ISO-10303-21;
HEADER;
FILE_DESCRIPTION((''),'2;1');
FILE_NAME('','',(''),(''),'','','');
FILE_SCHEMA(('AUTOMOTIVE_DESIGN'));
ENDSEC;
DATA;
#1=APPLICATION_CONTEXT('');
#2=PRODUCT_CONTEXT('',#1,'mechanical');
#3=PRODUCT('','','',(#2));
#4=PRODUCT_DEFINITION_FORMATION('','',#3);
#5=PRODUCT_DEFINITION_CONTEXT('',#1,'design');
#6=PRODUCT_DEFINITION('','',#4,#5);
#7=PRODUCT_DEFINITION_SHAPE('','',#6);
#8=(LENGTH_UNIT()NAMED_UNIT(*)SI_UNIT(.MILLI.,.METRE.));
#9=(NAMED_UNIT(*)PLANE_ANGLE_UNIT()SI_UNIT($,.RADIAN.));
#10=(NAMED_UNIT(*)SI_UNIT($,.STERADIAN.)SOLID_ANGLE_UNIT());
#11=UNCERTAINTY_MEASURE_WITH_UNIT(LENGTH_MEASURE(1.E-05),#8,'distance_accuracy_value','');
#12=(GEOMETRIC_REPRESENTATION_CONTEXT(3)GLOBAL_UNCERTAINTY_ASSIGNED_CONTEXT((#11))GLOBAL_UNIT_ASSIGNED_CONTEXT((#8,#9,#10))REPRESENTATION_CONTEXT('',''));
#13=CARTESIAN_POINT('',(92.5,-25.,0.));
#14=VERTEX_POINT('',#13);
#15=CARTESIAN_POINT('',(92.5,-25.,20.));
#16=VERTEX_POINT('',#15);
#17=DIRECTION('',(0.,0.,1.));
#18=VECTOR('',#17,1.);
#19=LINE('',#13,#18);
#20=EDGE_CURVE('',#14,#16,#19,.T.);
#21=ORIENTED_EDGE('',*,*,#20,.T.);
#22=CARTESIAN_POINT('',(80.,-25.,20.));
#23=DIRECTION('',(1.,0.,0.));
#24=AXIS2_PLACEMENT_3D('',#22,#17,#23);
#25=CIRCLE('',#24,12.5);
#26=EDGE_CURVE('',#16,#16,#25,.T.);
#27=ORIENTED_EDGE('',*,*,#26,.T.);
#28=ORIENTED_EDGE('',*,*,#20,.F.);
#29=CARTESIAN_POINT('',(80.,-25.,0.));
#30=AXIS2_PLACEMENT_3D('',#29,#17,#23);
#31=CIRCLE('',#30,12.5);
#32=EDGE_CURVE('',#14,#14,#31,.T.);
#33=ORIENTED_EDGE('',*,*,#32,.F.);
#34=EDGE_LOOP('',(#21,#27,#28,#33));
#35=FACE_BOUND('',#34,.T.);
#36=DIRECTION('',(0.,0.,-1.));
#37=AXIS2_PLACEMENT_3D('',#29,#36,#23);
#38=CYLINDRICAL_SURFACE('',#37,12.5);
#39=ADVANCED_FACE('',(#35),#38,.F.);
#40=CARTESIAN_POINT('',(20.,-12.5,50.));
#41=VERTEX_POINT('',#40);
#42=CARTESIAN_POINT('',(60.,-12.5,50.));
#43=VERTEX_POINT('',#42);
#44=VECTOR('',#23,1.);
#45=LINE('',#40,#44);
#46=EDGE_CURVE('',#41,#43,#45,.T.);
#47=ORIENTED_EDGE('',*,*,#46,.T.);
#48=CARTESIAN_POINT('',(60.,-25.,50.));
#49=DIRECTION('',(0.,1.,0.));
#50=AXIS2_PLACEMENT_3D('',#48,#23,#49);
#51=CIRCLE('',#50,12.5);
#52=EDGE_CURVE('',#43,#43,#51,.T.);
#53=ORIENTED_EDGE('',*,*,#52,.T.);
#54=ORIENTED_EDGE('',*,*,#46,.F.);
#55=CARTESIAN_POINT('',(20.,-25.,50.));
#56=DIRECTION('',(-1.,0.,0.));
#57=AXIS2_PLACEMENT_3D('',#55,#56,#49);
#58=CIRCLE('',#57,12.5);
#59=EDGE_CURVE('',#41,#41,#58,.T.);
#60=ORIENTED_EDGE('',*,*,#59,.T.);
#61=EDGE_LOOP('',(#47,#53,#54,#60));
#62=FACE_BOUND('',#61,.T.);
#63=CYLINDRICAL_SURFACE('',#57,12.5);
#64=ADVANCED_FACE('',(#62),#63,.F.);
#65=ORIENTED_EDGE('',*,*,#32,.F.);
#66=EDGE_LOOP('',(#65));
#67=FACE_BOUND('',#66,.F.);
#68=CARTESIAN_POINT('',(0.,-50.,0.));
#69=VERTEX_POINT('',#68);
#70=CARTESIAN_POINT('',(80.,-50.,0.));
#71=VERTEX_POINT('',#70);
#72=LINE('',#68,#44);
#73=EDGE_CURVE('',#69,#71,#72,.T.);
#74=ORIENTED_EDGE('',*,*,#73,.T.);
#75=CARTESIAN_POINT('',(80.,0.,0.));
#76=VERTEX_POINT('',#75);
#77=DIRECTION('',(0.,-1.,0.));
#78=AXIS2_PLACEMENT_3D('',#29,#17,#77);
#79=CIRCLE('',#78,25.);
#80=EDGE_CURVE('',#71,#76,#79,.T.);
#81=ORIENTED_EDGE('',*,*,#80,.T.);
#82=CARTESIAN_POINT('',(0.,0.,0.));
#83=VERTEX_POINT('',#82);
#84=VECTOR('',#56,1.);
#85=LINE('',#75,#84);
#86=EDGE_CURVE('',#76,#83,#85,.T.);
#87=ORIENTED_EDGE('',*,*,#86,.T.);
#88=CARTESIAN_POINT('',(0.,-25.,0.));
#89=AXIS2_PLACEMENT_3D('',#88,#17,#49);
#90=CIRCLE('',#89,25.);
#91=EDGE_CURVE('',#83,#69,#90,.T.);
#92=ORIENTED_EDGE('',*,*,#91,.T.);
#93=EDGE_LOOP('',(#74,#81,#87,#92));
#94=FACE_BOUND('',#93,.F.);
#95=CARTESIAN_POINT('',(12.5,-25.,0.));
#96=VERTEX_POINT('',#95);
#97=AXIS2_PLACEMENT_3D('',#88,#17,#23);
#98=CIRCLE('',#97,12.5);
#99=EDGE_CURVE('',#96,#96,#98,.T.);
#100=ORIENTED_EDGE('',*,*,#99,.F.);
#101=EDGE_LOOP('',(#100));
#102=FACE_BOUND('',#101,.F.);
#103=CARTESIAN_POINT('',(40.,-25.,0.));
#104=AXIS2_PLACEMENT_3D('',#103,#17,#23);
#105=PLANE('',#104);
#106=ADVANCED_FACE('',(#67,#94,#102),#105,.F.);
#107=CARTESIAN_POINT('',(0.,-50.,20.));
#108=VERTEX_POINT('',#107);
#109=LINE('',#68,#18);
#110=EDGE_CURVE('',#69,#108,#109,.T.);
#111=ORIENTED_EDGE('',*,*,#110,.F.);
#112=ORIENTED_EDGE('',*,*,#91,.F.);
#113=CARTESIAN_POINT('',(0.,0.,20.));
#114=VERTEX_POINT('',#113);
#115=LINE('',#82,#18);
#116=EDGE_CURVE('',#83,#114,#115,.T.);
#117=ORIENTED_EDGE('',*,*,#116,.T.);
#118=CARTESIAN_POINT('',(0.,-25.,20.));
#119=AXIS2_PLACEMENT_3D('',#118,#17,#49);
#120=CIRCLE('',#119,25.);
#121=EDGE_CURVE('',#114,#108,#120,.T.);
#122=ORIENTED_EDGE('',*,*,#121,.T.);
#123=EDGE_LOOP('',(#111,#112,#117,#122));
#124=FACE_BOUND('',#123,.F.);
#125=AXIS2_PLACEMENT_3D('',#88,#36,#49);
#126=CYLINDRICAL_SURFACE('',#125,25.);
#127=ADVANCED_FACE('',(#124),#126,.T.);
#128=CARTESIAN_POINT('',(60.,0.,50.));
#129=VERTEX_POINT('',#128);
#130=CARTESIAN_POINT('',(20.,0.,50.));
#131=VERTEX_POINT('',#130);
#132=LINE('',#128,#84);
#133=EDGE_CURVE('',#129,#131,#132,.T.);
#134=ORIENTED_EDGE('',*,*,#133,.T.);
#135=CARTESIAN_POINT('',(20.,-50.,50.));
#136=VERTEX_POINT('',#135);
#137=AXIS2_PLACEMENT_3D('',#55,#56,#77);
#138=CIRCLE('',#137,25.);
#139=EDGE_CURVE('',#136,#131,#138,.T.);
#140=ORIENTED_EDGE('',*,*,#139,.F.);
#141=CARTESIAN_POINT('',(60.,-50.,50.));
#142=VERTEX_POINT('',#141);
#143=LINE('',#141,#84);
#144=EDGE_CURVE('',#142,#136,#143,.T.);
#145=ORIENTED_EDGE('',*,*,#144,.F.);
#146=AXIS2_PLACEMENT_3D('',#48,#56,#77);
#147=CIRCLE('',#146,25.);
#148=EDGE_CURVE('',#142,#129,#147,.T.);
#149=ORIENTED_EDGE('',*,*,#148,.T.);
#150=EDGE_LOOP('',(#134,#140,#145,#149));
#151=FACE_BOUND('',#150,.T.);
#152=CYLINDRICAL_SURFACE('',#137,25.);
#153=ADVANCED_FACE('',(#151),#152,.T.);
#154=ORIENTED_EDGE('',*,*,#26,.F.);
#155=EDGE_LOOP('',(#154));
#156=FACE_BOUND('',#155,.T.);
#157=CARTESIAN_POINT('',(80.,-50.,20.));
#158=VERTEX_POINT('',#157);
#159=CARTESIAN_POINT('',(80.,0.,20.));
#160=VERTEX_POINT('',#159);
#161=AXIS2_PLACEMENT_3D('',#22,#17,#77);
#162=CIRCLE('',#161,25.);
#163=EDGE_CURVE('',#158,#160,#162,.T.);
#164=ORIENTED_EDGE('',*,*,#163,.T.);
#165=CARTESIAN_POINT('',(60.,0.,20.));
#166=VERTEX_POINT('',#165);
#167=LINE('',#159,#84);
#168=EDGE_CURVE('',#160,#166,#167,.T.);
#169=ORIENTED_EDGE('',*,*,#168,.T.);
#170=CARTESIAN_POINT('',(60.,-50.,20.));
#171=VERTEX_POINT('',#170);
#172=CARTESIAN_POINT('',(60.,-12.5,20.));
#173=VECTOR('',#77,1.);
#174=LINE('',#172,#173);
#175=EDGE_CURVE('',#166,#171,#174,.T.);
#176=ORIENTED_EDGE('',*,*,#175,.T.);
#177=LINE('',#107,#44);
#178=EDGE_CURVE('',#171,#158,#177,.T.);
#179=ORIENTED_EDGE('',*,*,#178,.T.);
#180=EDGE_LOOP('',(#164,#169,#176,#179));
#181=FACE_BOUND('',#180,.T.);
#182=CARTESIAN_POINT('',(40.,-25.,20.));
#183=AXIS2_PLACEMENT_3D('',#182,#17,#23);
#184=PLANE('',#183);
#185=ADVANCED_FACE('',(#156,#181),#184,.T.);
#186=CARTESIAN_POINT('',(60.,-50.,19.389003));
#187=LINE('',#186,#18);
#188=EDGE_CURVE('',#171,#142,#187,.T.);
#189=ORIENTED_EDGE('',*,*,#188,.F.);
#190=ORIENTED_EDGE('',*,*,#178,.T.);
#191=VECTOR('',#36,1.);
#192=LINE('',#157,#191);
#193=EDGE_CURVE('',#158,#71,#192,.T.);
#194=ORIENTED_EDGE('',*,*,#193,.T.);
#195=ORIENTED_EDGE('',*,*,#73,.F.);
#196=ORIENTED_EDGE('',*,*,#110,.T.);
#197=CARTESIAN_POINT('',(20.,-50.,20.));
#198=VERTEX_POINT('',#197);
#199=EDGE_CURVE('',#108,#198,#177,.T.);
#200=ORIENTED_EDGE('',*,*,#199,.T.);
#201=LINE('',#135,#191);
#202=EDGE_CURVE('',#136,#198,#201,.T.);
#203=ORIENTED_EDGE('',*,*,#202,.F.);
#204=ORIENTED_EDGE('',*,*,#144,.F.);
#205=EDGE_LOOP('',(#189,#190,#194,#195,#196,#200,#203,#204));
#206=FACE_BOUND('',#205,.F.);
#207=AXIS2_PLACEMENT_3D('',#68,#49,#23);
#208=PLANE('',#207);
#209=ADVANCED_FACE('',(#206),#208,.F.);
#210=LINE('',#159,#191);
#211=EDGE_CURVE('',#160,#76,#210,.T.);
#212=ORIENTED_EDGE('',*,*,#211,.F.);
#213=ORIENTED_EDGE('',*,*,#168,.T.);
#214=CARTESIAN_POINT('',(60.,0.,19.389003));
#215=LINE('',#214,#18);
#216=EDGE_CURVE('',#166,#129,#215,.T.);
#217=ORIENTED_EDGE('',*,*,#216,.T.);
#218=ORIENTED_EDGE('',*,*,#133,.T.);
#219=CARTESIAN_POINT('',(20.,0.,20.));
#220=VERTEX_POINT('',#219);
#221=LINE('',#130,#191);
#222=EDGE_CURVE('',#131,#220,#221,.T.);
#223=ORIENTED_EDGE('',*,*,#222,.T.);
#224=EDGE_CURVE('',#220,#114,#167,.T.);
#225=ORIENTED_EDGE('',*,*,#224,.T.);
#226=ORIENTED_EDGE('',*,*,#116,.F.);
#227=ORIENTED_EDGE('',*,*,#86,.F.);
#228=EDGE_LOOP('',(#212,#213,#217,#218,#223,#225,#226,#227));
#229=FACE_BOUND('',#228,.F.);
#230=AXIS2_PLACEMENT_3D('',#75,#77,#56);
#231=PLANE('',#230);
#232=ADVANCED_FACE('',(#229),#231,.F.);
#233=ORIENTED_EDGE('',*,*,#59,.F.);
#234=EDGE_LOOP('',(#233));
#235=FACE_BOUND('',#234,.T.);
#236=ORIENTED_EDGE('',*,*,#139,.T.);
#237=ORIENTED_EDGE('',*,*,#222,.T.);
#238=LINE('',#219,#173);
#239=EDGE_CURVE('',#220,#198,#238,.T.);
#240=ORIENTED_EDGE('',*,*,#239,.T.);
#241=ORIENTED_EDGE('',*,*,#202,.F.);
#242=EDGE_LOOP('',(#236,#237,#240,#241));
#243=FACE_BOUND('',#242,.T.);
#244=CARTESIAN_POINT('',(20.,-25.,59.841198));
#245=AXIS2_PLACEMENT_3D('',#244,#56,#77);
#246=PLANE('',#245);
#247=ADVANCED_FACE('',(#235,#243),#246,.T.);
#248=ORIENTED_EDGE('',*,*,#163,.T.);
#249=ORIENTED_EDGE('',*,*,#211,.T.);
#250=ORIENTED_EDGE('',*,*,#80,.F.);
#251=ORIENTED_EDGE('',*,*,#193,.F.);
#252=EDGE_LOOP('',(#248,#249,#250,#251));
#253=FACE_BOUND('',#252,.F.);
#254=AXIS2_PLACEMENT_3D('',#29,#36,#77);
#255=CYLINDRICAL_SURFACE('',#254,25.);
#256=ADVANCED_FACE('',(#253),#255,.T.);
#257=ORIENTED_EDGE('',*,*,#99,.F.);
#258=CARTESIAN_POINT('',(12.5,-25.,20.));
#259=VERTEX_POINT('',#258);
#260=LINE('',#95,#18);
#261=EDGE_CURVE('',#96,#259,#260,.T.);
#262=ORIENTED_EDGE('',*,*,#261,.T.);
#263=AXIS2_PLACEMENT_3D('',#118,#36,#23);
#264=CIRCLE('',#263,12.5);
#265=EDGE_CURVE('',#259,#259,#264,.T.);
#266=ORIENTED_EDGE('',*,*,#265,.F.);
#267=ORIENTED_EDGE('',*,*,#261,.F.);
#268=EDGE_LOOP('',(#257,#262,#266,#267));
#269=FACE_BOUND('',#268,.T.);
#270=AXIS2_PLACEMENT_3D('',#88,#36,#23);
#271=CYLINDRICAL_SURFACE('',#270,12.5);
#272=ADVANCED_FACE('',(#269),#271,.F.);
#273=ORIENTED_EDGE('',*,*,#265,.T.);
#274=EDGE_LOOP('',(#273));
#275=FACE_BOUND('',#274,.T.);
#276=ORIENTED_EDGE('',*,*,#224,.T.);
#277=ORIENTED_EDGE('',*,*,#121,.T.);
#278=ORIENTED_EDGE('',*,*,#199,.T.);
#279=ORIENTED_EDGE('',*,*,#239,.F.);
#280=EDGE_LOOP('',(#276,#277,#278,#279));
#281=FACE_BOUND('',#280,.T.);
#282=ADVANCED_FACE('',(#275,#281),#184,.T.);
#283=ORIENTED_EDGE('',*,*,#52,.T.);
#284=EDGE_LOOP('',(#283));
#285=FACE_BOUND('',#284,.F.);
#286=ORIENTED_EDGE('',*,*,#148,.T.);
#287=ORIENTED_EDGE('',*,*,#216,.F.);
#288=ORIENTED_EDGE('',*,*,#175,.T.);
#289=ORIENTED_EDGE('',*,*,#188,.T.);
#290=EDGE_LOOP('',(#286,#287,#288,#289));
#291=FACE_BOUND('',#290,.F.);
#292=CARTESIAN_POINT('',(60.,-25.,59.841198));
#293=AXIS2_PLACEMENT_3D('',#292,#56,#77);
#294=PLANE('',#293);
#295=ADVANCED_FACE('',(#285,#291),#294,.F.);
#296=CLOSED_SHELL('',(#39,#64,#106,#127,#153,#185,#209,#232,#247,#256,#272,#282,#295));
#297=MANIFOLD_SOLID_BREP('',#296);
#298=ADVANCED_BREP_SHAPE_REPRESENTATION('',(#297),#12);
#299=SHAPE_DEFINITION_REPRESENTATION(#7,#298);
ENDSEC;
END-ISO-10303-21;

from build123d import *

# Parameters (mm, degrees)
F1_R     = 12.5
F2_DEPTH = 20
F3_DEPTH = 50
F4_DEPTH = 25
F6_DEPTH = 40
F7_DEPTH = 40


with BuildPart() as f2:
    # F1 (on Top) → F2 (new body)
    with BuildSketch(Plane.XY):
        with BuildLine():
            Line((80, 0), (0, 0))
            ThreePointArc((0, 0), (-25, -25), (0, -50))
            Line((0, -50), (80, -50))
            ThreePointArc((80, -50), (105, -25), (80, 0))
        make_face()
        with Locations((0, -25)):
            Circle(F1_R, mode=Mode.SUBTRACT)
        with Locations((80, -25)):
            Circle(F1_R, mode=Mode.SUBTRACT)
    extrude(amount=F2_DEPTH)

    # F0 (on Front) → F3 (join)
    with BuildSketch(Plane.XZ):
        Polygon((0, 20), (0, 0), (80, 0), (80, 19.3890032326), (60, 19.3890032326), (60, 50), (20, 50), (20, 20), align=None)
    extrude(amount=F3_DEPTH)

    # F1 (on Top) → F4 (cut)
    with BuildSketch(Plane.XY):
        with Locations((0, -25)):
            Circle(F1_R)
        with Locations((80, -25)):
            Circle(F1_R)
    extrude(amount=F4_DEPTH, mode=Mode.SUBTRACT)

    # F5 (on face) → F6 (join)
    with BuildSketch(Plane(origin=(20, 0, 0), x_dir=(0, -1, 0), z_dir=(-1, 0, 0))):
        with BuildLine():
            ThreePointArc((12.5, 50), (25, 62.5), (37.5, 50))
            Line((37.5, 50), (50, 50))
            ThreePointArc((50, 50), (25, 75), (0, 50))
            Line((0, 50), (12.5, 50))
        make_face()
    extrude(amount=-F6_DEPTH)

    # F5 (on face) → F7 (cut)
    with BuildSketch(Plane(origin=(20, 0, 0), x_dir=(0, -1, 0), z_dir=(-1, 0, 0))):
        with BuildLine():
            ThreePointArc((12.5, 50), (25, 37.5), (37.5, 50))
            Line((37.5, 50), (12.5, 50))
        make_face()
    extrude(amount=-F7_DEPTH, mode=Mode.SUBTRACT)


solid = f2.part
